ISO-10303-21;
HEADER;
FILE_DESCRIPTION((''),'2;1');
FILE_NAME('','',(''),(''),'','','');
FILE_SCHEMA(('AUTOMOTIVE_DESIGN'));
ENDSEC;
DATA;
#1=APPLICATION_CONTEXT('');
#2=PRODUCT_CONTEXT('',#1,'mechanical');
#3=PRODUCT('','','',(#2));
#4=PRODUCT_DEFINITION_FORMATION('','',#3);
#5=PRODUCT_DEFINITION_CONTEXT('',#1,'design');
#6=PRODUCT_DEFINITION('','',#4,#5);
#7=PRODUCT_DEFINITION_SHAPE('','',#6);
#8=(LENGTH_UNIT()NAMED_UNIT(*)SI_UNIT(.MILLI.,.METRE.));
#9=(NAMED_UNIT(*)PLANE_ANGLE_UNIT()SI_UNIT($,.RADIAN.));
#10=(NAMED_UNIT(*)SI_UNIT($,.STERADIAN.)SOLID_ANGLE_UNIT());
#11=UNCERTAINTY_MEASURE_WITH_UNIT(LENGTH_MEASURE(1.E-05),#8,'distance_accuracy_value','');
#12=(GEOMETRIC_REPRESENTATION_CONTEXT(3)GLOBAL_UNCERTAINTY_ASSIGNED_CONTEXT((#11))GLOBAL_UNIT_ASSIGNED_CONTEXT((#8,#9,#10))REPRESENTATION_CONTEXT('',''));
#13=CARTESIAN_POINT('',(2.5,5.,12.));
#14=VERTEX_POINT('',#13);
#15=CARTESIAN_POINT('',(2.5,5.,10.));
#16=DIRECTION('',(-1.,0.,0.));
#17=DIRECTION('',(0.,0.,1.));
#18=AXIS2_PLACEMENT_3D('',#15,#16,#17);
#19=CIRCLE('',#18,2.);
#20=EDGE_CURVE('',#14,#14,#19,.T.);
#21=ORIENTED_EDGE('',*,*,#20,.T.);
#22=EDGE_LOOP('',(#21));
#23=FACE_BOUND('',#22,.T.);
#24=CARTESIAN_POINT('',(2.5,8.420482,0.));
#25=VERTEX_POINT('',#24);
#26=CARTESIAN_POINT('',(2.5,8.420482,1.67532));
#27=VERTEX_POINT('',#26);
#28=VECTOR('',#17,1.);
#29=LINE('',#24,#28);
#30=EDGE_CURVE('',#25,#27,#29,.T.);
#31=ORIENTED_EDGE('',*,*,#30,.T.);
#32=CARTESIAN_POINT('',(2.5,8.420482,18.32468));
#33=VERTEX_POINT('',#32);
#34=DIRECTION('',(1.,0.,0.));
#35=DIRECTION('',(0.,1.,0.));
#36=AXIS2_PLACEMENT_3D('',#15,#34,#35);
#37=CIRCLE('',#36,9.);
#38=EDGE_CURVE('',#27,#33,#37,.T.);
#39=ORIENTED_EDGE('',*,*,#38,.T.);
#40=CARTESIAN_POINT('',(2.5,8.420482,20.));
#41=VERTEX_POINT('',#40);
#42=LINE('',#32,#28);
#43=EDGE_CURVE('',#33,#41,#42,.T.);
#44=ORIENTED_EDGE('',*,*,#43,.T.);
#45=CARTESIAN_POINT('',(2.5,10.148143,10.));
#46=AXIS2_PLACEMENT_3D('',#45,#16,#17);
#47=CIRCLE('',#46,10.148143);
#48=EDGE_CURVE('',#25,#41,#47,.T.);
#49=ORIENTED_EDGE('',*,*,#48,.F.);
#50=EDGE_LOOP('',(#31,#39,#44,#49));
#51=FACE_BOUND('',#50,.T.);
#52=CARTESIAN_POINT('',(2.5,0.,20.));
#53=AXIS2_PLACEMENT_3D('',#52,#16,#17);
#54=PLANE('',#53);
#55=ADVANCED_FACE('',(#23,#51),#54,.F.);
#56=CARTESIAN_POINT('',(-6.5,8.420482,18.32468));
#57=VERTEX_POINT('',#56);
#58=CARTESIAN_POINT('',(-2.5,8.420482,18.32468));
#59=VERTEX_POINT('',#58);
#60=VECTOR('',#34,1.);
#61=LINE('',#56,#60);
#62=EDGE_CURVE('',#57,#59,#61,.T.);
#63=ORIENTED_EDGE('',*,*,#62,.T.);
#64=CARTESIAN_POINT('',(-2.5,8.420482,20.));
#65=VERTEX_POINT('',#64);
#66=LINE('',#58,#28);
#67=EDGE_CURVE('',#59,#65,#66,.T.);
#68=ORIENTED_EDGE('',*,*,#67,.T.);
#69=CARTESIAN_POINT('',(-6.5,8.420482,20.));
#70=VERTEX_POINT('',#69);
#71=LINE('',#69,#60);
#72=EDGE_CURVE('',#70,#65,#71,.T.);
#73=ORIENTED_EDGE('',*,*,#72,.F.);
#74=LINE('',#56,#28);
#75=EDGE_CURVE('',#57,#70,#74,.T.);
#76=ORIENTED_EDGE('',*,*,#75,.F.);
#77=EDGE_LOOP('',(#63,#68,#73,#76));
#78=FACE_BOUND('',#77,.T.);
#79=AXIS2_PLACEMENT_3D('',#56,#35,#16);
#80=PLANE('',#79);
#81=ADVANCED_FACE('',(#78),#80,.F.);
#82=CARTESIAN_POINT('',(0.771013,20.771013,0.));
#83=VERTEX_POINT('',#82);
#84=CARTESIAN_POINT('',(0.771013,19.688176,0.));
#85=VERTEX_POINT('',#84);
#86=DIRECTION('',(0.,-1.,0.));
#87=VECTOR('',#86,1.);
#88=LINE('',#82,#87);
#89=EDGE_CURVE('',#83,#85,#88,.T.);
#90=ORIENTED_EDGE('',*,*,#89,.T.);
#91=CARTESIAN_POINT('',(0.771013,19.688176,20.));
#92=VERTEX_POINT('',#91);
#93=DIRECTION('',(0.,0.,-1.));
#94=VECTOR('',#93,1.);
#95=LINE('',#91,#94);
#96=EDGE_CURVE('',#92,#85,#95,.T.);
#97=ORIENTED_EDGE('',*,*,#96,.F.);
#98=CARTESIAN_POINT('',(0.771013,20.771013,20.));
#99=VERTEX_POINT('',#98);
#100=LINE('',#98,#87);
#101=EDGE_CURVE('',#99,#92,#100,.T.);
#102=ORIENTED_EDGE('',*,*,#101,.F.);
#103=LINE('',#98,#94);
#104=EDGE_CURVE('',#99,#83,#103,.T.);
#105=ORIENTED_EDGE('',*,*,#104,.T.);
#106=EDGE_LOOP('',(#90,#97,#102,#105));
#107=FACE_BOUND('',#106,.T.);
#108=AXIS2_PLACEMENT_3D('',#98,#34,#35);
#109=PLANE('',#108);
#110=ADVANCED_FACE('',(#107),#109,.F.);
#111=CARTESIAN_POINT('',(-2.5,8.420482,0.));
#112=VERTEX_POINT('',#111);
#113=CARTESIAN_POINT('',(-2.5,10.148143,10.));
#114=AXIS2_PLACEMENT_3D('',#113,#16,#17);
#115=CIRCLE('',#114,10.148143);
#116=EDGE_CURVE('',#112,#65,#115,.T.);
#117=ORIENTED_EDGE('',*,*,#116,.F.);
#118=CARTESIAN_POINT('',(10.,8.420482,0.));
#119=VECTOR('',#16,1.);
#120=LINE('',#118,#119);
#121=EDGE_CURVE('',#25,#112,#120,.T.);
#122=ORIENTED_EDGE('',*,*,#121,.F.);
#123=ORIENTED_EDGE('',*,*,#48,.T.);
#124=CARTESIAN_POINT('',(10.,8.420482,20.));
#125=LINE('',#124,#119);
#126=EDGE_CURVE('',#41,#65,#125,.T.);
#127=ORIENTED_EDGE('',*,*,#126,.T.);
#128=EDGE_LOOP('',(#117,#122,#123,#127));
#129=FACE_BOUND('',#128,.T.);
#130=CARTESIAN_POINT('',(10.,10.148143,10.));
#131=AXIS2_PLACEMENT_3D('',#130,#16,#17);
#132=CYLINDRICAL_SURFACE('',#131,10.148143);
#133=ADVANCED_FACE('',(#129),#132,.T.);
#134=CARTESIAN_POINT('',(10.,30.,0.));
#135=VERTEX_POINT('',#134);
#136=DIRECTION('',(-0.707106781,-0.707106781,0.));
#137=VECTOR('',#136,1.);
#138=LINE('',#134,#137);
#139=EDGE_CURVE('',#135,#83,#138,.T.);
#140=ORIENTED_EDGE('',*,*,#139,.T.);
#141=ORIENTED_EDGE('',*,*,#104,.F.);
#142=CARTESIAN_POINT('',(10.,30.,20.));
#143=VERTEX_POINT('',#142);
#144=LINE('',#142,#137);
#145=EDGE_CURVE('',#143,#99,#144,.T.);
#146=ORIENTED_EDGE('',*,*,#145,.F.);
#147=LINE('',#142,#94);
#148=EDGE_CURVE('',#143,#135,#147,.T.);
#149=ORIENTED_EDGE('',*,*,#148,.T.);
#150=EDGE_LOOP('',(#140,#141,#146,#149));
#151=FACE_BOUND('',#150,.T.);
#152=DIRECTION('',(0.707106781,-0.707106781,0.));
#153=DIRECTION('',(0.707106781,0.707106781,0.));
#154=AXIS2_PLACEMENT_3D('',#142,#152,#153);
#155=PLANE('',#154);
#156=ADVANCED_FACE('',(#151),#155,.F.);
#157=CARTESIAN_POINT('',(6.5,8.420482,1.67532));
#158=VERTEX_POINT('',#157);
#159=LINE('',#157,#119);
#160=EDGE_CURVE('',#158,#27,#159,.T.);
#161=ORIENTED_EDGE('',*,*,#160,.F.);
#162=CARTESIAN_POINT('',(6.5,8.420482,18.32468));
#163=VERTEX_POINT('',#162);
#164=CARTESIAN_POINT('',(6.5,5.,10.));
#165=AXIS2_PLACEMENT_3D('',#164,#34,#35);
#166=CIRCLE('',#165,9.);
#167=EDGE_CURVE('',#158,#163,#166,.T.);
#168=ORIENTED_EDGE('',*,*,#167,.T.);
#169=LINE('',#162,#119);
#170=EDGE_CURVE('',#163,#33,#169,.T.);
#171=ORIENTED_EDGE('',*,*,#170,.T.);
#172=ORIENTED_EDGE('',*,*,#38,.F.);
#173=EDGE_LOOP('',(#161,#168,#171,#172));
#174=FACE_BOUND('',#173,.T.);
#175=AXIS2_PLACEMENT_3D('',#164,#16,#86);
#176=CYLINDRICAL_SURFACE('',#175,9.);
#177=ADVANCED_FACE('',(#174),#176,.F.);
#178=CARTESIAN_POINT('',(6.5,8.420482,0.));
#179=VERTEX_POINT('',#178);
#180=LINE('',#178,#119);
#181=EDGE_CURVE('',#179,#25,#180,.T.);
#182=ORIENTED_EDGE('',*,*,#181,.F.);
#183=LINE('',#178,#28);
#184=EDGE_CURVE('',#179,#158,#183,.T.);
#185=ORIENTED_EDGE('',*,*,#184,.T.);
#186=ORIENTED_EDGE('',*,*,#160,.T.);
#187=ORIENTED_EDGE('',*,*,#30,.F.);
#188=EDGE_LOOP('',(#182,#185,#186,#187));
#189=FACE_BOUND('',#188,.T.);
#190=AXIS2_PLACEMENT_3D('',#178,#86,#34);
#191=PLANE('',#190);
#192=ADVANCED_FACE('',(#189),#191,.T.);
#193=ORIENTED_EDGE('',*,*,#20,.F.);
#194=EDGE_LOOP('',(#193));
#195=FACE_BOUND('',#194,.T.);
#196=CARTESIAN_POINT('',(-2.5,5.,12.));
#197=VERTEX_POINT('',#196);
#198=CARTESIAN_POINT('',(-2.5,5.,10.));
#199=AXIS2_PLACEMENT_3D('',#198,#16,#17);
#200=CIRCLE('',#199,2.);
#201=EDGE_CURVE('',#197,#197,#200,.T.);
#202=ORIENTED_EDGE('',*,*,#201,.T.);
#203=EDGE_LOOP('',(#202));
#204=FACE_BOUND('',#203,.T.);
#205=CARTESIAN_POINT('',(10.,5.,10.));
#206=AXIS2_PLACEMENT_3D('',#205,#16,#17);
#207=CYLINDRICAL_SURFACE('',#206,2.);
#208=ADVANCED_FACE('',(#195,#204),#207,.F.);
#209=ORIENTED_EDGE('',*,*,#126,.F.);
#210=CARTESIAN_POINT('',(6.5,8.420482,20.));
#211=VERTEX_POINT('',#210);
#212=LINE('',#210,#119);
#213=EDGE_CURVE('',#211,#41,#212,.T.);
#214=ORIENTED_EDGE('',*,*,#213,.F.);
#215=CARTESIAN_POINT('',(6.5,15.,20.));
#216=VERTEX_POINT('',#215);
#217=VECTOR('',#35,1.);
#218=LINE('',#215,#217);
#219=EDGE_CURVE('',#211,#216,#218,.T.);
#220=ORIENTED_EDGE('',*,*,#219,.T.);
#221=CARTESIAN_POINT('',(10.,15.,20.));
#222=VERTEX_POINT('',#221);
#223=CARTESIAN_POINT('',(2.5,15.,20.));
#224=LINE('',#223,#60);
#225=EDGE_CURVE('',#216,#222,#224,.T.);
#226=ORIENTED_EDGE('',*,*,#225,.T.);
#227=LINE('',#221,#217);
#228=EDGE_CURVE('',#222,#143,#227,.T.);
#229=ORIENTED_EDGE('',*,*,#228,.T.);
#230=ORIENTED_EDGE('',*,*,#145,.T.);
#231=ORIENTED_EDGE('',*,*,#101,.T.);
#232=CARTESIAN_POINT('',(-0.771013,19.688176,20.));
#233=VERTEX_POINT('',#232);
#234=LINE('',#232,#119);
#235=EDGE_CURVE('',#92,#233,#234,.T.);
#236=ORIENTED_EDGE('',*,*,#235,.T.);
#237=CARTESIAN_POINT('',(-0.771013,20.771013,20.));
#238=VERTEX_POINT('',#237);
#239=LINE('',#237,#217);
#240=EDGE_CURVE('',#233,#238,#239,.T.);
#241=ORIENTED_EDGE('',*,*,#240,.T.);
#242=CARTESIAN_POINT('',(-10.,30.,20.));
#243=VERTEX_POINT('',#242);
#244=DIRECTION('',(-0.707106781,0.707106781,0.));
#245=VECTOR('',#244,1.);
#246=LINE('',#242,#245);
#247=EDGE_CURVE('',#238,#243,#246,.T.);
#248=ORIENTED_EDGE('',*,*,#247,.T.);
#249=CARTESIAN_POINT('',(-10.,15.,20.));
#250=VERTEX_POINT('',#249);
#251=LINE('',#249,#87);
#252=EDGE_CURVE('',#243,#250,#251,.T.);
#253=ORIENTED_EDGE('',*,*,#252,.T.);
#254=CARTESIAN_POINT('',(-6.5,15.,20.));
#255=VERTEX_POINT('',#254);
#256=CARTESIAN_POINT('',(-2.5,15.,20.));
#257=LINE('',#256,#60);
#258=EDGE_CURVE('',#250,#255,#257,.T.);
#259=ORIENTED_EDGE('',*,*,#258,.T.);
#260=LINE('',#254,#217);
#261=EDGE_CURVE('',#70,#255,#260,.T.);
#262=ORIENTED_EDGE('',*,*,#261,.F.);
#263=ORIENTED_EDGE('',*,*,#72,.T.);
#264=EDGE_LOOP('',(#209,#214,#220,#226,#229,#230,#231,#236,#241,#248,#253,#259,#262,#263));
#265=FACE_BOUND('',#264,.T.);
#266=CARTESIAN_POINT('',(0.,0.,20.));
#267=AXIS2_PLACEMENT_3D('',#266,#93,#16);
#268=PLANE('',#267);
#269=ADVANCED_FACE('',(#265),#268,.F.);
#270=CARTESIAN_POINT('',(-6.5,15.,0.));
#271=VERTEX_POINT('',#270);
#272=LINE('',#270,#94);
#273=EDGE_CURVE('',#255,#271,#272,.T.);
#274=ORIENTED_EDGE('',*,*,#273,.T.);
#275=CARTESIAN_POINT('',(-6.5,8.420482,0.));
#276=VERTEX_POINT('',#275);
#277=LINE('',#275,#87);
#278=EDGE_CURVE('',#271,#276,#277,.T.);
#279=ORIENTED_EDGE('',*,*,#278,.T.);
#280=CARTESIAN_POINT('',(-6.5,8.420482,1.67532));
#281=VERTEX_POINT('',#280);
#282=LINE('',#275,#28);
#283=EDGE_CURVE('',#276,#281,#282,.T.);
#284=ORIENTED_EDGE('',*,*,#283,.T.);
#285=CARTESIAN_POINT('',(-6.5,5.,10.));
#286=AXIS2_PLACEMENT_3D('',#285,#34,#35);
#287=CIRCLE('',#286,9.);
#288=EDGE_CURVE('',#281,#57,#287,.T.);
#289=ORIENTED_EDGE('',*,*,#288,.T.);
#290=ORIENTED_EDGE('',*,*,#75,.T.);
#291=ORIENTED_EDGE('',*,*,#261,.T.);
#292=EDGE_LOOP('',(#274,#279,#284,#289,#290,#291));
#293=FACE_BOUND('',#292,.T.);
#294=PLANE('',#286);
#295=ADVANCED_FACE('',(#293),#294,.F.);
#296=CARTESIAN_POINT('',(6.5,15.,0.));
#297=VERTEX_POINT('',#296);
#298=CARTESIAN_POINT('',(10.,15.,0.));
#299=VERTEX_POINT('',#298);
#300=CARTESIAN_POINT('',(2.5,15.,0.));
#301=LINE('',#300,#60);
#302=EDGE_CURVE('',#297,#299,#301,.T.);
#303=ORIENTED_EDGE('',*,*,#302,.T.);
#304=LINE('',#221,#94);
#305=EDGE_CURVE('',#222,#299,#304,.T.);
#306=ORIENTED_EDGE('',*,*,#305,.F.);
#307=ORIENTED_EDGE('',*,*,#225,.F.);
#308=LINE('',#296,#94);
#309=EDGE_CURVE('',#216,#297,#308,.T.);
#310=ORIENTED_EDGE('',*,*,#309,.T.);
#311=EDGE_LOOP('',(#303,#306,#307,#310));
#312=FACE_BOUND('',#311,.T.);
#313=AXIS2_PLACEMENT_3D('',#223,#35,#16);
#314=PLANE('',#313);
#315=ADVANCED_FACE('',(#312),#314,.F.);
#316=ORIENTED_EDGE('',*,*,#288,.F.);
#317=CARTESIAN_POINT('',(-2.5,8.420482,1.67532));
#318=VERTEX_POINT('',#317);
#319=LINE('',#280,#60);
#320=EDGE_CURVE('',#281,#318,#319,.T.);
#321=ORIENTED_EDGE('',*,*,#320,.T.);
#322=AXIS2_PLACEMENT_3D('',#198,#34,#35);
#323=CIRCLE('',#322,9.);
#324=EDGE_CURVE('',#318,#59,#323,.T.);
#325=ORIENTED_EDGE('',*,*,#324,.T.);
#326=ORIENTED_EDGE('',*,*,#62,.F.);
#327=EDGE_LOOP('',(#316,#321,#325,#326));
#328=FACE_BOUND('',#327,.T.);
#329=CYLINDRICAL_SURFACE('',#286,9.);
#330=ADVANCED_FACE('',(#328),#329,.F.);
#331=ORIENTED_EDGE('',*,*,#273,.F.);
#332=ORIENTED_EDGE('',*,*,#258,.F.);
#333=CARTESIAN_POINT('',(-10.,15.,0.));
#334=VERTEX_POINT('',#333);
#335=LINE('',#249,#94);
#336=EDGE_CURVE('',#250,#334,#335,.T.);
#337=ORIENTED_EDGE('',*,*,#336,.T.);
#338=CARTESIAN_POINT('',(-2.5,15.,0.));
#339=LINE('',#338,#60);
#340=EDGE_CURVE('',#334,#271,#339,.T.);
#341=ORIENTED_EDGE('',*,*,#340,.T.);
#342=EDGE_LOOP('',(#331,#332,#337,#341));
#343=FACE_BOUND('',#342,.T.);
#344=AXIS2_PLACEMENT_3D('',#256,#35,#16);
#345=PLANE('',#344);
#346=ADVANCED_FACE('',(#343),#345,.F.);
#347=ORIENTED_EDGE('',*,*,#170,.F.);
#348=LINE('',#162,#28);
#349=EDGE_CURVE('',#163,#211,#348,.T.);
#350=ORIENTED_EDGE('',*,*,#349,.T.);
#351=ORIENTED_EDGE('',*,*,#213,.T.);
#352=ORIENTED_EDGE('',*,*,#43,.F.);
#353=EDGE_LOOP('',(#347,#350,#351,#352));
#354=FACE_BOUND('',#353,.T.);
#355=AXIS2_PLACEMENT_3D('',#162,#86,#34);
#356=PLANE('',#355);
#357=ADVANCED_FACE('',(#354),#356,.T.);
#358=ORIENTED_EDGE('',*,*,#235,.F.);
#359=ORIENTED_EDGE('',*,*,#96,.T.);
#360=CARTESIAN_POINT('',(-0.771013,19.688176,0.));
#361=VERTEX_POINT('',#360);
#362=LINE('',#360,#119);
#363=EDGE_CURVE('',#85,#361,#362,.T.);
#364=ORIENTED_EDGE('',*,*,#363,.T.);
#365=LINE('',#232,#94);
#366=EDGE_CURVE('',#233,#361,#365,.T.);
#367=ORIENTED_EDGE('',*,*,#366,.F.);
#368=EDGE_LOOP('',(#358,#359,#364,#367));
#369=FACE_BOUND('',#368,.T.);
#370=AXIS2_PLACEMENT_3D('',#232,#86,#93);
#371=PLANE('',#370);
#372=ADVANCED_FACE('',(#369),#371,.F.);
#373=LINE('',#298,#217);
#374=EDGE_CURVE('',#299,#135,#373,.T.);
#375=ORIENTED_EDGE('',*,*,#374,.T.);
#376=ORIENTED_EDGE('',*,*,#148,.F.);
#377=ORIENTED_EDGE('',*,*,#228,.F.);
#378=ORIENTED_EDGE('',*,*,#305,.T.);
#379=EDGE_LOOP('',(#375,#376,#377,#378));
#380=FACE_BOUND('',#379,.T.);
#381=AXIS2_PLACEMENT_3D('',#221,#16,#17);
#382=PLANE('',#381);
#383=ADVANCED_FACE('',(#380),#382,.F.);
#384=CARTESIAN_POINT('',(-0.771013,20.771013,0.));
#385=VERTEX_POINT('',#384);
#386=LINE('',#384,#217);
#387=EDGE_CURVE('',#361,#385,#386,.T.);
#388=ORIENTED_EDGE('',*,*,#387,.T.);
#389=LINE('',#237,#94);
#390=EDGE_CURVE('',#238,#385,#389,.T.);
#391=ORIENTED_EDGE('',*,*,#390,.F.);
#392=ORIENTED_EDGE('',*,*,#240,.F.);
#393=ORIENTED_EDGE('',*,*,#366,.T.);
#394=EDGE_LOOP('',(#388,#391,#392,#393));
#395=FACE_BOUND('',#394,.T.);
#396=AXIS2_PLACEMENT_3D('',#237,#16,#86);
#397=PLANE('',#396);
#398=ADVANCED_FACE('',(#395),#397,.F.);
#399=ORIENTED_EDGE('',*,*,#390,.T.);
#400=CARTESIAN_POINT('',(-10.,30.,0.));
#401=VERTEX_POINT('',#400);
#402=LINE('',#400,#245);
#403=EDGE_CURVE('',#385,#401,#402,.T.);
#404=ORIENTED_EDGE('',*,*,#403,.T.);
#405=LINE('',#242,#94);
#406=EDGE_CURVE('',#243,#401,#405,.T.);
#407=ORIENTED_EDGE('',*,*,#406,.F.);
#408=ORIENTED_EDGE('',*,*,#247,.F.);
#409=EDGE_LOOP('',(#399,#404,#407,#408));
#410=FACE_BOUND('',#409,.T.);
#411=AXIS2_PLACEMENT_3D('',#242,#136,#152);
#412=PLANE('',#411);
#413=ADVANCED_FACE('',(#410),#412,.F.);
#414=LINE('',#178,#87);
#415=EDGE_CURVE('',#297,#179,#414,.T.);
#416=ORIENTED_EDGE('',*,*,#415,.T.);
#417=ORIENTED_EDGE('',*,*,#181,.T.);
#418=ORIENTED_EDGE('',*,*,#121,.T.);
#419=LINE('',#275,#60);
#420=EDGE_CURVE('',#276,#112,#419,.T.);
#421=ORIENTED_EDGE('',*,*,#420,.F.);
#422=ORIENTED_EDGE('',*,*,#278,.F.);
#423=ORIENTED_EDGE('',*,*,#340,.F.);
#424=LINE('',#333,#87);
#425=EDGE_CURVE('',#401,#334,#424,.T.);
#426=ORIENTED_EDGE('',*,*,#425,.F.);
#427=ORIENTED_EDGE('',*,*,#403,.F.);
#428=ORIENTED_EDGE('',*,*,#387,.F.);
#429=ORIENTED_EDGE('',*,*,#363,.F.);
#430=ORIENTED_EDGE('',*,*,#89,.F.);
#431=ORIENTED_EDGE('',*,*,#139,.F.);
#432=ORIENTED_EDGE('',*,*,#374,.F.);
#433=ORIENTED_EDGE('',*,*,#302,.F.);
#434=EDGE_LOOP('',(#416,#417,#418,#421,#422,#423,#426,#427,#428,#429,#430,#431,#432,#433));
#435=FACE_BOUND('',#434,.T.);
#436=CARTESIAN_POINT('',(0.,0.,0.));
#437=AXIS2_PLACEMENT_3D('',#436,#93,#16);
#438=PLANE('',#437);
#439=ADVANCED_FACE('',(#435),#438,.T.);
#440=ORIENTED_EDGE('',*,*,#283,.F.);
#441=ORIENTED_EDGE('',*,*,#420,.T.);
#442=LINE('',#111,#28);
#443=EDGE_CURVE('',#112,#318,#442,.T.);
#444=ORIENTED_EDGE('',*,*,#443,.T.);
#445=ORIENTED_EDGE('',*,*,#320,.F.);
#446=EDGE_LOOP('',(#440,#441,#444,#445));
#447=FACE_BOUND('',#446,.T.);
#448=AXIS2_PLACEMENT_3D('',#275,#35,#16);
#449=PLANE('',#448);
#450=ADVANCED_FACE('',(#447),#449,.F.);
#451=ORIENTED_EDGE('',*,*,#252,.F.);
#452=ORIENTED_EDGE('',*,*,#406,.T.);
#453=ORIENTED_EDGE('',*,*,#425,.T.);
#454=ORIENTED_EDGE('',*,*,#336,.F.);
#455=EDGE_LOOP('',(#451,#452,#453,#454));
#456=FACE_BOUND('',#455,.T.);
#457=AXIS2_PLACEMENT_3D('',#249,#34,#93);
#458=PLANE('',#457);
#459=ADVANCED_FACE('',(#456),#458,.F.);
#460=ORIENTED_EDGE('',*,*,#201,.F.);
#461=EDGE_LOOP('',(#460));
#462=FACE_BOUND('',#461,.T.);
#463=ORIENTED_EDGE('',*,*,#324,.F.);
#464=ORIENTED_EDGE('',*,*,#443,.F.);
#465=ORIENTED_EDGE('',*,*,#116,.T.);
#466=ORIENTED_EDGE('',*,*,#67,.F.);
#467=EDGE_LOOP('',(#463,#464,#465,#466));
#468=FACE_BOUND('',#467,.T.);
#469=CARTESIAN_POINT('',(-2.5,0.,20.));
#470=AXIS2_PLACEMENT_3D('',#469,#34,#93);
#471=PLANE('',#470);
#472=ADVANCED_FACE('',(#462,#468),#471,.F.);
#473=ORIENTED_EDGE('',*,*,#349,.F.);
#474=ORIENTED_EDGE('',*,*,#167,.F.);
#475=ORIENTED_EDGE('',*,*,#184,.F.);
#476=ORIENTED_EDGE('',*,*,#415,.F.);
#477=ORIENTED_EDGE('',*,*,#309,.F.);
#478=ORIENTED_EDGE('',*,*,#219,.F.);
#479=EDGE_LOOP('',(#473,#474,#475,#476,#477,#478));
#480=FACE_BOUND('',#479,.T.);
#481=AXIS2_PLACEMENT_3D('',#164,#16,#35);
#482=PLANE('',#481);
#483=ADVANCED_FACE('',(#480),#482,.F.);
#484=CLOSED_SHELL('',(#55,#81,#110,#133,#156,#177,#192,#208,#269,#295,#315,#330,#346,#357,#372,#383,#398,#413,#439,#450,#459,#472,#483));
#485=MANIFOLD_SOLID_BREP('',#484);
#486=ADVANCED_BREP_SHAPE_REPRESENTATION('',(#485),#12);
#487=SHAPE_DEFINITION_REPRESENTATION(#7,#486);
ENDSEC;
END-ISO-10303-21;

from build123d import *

# Parameters (mm, degrees)
SALIENTE_EXTRUIR1_DEPTH = 20
CROQUIS2_R              = 2
CORTAR_EXTRUIR1_DEPTH   = 39.160843806
SALIENTE_EXTRUIR3_DEPTH = 4
CORTAR_EXTRUIR3_DEPTH   = 39.160843806


with BuildPart() as part:
    # Croquis1 → Saliente-Extruir1 (new body)
    with BuildSketch(Plane.XY):
        Polygon((2.5, 0), (-2.5, 0), (-2.5, 15), (-10, 15), (-10, 30), (-0.771012727, 20.771012727), (-0.771012727, 19.688176129), (0.771012727, 19.688176129), (0.771012727, 20.771012727), (10, 30), (10, 15), (2.5, 15), align=None)
    extrude(amount=SALIENTE_EXTRUIR1_DEPTH)

    # Croquis2 → Cortar-Extruir1 (cut, through all)
    with BuildSketch(Plane.ZY.offset(2.5)):
        with Locations((10, 5)):
            Circle(CROQUIS2_R)
    extrude(amount=-CORTAR_EXTRUIR1_DEPTH, mode=Mode.SUBTRACT)

    # Croquis3 → Saliente-Extruir3 (add)
    with BuildSketch(Plane.ZY.offset(2.5)):
        with BuildLine():
            Line((0, 8.420482436), (0, 15))
            Line((0, 15), (20, 15))
            Line((20, 15), (20, 8.420482436))
            Line((20, 8.420482436), (18.324680168, 8.420482436))
            ThreePointArc((18.324680168, 8.420482436), (10, 14), (1.675319832, 8.420482436))
            Line((1.675319832, 8.420482436), (0, 8.420482436))
        make_face()
    saliente_extruir3 = extrude(amount=SALIENTE_EXTRUIR3_DEPTH)

    # Simetría2: Saliente-Extruir3 across plane
    add(saliente_extruir3.mirror(Plane.ZY))

    # Croquis5 → Cortar-Extruir3 (cut, through all)
    with BuildSketch(Plane.ZY.offset(2.5)):
        with BuildLine():
            ThreePointArc((9.999999976, 0), (3.46347713, 2.385496773), (0, 8.420482436))
            Line((0, 8.420482436), (0, 0))
            Line((0, 0), (9.999999976, 0))
        make_face()
        with BuildLine():
            ThreePointArc((20, 8.420482436), (16.536522852, 2.385496758), (9.999999976, 0))
            Line((9.999999976, 0), (20, 0))
            Line((20, 0), (20, 8.420482436))
        make_face()
    extrude(amount=-CORTAR_EXTRUIR3_DEPTH, mode=Mode.SUBTRACT)


solid = part.part
